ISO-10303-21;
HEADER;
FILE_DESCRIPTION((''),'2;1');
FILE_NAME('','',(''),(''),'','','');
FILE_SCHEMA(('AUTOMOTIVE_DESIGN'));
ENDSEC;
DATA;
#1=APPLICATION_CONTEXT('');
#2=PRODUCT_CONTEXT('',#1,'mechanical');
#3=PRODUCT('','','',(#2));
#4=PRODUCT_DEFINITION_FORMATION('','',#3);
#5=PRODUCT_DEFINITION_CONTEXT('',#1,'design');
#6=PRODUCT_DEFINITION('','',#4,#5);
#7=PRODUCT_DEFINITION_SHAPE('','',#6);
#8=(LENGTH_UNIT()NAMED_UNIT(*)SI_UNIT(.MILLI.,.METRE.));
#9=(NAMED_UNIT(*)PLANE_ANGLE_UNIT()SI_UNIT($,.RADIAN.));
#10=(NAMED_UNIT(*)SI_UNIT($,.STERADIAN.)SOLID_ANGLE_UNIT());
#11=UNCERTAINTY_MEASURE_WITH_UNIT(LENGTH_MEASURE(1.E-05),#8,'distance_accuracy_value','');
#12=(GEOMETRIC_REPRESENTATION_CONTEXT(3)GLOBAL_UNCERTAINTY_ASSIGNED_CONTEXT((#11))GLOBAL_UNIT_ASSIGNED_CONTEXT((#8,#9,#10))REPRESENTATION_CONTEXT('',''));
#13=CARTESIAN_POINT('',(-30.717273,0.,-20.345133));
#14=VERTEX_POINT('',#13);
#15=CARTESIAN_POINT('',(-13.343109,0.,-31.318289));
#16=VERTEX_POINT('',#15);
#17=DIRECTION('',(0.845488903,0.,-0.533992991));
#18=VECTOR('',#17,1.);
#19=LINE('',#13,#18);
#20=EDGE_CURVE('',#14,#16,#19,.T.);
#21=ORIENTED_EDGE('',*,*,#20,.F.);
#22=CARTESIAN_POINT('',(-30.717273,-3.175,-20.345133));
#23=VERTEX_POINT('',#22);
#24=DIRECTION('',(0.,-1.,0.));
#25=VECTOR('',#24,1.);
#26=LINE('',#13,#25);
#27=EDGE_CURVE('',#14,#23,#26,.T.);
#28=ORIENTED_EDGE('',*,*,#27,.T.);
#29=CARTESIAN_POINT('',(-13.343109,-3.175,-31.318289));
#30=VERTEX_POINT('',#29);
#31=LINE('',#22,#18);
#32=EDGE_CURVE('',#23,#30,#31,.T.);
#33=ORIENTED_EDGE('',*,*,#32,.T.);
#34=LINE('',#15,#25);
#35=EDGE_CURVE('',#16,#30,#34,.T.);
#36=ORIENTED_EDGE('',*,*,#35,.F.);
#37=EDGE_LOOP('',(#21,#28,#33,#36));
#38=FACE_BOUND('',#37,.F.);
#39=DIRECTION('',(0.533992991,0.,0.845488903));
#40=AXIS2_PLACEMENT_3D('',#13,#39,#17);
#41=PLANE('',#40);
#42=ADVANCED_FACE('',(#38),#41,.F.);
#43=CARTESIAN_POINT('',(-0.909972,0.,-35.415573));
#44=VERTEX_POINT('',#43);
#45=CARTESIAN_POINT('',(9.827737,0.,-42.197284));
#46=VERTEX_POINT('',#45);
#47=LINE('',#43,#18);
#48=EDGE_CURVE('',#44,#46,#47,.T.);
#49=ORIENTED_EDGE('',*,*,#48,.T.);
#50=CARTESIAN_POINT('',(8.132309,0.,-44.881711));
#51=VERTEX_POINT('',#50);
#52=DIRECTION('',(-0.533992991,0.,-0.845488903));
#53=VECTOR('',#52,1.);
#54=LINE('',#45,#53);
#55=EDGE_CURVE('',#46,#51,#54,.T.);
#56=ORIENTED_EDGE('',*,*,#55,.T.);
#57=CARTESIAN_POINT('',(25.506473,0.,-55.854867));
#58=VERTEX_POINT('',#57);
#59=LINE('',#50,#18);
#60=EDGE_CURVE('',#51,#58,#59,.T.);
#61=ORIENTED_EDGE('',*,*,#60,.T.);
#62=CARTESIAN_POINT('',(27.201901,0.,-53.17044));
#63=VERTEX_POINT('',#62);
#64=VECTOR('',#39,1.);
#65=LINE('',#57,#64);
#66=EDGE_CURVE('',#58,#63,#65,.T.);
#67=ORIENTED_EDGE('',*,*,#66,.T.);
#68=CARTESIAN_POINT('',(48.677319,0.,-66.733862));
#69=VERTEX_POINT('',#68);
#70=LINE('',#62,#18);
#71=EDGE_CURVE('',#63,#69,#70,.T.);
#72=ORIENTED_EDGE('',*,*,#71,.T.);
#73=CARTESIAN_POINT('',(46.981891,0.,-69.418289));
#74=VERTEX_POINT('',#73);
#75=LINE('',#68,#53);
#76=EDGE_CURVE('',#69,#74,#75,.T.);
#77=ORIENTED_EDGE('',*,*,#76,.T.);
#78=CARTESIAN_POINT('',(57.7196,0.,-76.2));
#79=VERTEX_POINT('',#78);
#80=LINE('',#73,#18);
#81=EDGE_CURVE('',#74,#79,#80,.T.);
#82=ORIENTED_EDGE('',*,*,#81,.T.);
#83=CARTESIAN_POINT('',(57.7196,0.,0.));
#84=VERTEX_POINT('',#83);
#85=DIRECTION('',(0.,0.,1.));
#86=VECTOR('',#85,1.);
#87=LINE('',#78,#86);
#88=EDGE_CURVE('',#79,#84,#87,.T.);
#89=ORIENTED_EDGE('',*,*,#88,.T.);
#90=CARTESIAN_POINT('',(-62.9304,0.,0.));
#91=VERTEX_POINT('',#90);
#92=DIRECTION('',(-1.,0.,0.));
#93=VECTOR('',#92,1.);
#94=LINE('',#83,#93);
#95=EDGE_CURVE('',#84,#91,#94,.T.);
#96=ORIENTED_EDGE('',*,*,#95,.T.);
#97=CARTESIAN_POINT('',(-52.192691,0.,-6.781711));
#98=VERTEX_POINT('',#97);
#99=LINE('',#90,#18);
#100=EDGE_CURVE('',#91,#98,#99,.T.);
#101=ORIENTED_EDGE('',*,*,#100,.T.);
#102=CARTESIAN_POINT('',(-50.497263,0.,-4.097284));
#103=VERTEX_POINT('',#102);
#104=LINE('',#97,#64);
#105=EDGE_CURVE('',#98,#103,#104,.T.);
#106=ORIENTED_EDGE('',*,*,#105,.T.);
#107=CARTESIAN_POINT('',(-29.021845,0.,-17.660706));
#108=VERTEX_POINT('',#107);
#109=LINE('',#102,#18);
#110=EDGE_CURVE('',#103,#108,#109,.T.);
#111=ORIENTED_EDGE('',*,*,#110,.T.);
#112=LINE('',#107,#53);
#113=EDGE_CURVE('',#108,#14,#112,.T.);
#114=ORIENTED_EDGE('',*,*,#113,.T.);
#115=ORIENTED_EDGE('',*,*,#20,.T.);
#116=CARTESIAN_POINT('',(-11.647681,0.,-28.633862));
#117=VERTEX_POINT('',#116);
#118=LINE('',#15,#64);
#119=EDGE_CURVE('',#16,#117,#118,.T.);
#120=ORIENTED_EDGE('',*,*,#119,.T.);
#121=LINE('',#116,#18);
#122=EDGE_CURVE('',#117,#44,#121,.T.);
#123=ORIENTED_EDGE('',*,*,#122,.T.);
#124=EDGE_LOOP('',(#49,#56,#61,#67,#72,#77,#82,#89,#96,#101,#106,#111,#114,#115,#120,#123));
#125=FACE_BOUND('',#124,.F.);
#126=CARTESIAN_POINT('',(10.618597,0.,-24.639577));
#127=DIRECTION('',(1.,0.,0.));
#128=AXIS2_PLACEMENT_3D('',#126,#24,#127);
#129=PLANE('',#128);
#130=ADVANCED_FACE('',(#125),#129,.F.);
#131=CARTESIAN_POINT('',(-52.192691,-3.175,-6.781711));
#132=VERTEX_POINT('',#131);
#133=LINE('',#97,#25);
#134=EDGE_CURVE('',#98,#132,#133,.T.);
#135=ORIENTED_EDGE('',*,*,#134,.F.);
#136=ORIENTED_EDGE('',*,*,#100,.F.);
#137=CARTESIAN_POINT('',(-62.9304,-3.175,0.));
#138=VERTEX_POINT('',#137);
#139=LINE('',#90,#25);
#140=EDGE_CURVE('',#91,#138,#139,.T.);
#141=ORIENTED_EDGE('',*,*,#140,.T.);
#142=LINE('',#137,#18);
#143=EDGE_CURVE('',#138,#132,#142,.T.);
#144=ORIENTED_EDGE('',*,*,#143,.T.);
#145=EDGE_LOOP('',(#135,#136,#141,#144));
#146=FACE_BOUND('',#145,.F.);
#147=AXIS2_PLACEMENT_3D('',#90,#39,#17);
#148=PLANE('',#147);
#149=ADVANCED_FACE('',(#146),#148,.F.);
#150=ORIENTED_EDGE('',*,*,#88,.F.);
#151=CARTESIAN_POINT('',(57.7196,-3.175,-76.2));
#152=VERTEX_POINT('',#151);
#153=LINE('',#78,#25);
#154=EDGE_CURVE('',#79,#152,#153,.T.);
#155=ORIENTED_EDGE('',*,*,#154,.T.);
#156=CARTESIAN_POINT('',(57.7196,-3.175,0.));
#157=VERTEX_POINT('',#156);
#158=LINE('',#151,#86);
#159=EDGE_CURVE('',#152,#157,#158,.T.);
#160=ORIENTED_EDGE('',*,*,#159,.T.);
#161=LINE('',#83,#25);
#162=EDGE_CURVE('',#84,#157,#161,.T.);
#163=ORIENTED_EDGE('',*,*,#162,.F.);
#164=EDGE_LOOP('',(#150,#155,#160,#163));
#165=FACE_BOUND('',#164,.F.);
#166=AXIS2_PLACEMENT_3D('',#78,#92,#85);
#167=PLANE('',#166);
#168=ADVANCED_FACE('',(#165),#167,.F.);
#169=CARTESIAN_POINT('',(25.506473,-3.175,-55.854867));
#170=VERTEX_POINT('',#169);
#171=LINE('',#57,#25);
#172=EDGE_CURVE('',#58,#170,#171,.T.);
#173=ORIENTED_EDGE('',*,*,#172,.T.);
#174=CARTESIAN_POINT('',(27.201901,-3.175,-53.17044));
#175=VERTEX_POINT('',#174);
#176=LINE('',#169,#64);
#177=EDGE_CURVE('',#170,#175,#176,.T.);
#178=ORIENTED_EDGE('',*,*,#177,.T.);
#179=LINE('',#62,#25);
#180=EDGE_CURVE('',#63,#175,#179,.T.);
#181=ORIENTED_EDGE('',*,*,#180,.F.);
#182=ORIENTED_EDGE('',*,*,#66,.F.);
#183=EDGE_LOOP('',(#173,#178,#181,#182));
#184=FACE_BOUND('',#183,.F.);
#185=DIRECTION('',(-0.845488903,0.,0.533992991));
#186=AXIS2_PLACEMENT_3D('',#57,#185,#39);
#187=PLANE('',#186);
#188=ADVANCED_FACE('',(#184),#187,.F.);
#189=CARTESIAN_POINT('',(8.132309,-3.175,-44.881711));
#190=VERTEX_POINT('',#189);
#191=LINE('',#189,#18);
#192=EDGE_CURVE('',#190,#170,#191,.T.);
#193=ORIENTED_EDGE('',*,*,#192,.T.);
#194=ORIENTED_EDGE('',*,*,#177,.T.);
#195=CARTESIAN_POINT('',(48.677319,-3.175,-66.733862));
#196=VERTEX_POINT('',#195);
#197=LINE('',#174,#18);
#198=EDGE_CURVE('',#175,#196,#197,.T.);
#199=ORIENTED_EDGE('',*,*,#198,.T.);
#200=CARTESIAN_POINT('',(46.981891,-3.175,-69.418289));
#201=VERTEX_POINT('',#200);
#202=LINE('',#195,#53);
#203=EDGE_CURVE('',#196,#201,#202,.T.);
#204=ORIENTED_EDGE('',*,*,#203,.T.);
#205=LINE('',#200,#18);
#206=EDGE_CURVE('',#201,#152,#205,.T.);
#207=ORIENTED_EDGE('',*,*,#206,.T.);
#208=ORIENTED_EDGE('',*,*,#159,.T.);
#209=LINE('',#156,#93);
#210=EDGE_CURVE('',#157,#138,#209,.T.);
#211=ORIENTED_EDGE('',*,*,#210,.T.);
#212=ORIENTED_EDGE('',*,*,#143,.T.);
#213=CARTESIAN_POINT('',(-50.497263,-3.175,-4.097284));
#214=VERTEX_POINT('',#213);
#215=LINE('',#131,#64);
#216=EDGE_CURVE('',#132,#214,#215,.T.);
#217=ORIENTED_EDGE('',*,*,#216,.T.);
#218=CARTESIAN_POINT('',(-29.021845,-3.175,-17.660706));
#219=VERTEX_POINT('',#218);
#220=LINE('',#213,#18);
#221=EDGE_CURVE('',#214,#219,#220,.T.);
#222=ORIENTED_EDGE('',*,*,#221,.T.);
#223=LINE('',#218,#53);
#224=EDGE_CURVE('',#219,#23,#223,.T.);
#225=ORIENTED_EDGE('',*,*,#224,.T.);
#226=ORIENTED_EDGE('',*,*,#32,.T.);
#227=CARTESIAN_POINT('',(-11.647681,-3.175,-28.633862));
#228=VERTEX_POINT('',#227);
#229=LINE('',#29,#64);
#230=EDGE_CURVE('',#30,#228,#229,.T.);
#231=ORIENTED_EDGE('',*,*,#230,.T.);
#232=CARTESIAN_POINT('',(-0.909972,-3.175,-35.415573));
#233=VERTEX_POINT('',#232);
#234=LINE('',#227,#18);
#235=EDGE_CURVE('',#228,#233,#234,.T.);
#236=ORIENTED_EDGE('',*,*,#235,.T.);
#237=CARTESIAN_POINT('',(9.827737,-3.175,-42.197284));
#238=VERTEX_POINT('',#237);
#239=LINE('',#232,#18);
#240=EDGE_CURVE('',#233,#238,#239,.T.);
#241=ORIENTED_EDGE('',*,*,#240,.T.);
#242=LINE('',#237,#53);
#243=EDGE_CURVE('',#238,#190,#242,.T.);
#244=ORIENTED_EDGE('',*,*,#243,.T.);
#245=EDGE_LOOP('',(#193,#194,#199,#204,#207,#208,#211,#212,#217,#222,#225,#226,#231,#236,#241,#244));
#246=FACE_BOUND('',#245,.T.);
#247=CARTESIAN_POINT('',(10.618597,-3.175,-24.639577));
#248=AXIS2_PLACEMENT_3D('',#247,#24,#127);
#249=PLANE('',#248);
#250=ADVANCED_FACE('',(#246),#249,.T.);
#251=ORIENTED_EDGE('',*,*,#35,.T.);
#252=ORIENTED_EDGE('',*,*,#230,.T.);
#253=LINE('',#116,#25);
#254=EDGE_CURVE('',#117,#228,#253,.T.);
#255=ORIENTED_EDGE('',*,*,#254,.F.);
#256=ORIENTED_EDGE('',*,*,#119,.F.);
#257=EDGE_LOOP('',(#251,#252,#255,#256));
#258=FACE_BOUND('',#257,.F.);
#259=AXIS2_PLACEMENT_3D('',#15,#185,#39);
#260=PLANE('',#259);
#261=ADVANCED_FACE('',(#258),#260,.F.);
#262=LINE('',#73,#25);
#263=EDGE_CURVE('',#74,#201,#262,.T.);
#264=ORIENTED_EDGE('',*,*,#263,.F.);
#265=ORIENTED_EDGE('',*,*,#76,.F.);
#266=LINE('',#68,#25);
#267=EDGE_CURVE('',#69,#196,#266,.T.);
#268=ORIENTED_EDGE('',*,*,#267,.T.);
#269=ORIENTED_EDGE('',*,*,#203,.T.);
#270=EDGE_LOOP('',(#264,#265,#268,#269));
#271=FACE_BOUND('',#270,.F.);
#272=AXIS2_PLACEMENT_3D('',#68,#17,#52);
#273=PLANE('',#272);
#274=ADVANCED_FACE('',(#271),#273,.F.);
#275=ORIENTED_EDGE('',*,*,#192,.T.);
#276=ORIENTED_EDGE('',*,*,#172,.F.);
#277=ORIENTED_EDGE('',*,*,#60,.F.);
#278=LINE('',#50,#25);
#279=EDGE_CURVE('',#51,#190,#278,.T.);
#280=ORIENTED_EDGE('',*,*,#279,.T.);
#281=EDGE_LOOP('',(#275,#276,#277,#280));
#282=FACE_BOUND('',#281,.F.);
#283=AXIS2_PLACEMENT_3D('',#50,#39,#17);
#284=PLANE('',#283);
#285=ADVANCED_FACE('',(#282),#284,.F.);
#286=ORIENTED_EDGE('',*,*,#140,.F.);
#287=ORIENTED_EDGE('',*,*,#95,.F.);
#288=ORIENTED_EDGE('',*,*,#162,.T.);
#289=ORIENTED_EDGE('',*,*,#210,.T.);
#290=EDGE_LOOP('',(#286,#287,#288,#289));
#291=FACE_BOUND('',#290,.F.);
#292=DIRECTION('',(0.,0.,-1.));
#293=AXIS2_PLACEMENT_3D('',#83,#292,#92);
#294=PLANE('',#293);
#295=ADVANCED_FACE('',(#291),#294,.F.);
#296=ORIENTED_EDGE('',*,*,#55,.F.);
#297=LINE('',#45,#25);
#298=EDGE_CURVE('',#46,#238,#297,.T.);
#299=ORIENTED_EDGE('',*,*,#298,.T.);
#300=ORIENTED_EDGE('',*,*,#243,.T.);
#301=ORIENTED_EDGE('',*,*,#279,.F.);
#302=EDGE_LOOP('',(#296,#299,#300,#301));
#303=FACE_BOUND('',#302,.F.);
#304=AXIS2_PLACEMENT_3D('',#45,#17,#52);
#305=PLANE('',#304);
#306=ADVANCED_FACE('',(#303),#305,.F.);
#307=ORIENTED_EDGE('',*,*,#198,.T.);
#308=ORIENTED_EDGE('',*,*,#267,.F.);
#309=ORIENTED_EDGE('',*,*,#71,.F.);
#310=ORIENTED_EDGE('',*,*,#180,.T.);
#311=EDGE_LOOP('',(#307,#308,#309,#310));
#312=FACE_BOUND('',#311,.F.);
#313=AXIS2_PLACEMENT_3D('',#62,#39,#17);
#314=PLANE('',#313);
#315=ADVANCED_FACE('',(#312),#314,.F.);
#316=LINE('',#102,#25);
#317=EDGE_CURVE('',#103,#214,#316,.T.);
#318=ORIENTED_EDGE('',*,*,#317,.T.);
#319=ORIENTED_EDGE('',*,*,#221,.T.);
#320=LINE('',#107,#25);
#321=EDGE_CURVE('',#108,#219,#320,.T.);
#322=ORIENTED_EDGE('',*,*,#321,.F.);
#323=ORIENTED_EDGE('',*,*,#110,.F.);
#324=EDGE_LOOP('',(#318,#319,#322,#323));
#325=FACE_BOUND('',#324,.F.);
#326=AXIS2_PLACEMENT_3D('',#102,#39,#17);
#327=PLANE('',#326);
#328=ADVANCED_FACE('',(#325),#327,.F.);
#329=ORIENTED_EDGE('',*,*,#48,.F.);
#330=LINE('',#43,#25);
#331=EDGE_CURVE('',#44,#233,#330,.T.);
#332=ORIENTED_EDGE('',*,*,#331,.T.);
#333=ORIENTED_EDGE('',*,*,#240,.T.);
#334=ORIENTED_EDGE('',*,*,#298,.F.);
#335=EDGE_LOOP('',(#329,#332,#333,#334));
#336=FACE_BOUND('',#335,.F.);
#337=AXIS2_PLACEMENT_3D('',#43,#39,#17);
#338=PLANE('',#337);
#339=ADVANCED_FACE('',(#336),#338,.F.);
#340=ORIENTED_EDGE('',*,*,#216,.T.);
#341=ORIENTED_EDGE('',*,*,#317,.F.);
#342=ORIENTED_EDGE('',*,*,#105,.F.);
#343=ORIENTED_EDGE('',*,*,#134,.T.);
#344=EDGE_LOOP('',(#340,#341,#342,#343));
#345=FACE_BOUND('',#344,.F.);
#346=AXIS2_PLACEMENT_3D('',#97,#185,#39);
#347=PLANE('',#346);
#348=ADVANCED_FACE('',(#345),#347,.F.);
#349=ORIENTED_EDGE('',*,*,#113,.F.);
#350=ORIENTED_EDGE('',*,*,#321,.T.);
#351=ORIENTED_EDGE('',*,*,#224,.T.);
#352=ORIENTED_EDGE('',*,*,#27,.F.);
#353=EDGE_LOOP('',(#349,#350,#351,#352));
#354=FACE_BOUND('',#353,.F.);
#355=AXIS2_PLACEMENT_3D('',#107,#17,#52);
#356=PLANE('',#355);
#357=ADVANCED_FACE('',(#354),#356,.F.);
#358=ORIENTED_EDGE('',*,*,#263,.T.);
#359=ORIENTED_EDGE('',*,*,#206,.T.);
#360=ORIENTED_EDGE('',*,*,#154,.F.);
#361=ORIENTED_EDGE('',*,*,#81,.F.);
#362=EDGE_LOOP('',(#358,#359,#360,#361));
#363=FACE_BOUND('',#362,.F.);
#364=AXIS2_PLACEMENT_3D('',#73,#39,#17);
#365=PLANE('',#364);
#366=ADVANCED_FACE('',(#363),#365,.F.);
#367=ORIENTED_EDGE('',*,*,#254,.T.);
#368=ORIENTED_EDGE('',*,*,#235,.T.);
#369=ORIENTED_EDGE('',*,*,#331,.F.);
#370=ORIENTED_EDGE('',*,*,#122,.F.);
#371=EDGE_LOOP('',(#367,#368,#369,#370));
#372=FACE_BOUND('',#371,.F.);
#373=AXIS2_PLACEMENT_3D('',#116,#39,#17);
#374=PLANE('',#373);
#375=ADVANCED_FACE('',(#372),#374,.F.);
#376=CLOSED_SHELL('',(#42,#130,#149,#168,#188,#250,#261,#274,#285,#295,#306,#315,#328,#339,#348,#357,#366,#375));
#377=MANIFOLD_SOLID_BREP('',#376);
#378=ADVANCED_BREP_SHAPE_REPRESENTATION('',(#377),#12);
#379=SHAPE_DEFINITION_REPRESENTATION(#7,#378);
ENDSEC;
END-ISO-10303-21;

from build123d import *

# Parameters (mm, degrees)
F1_DEPTH = 3.175


# Not quite as in the source:
# - a feature names something its author has since deleted; it is built from what else it names


with BuildPart() as f1:
    # F0 (on Front) → F1 (new body)
    with BuildSketch(Plane.XZ):
        Polygon((57.7196001889, 0), (-62.9303998111, 0), (-52.1926907426, -6.7817109906), (-50.4972629949, -4.0972837235), (-29.0218448579, -17.6607057048), (-30.7172726056, -20.3451329719), (-13.3431088796, -31.3182890094), (-11.6476811319, -28.6338617422), (-0.9099720634, -35.4155727329), (9.8277370051, -42.1972837235), (8.1323092574, -44.8817109906), (25.5064729834, -55.8548670281), (27.2019007311, -53.170439761), (48.6773188681, -66.7338617422), (46.9818911204, -69.4182890094), (57.7196001889, -76.2), align=None)
    extrude(amount=F1_DEPTH)


solid = f1.part
